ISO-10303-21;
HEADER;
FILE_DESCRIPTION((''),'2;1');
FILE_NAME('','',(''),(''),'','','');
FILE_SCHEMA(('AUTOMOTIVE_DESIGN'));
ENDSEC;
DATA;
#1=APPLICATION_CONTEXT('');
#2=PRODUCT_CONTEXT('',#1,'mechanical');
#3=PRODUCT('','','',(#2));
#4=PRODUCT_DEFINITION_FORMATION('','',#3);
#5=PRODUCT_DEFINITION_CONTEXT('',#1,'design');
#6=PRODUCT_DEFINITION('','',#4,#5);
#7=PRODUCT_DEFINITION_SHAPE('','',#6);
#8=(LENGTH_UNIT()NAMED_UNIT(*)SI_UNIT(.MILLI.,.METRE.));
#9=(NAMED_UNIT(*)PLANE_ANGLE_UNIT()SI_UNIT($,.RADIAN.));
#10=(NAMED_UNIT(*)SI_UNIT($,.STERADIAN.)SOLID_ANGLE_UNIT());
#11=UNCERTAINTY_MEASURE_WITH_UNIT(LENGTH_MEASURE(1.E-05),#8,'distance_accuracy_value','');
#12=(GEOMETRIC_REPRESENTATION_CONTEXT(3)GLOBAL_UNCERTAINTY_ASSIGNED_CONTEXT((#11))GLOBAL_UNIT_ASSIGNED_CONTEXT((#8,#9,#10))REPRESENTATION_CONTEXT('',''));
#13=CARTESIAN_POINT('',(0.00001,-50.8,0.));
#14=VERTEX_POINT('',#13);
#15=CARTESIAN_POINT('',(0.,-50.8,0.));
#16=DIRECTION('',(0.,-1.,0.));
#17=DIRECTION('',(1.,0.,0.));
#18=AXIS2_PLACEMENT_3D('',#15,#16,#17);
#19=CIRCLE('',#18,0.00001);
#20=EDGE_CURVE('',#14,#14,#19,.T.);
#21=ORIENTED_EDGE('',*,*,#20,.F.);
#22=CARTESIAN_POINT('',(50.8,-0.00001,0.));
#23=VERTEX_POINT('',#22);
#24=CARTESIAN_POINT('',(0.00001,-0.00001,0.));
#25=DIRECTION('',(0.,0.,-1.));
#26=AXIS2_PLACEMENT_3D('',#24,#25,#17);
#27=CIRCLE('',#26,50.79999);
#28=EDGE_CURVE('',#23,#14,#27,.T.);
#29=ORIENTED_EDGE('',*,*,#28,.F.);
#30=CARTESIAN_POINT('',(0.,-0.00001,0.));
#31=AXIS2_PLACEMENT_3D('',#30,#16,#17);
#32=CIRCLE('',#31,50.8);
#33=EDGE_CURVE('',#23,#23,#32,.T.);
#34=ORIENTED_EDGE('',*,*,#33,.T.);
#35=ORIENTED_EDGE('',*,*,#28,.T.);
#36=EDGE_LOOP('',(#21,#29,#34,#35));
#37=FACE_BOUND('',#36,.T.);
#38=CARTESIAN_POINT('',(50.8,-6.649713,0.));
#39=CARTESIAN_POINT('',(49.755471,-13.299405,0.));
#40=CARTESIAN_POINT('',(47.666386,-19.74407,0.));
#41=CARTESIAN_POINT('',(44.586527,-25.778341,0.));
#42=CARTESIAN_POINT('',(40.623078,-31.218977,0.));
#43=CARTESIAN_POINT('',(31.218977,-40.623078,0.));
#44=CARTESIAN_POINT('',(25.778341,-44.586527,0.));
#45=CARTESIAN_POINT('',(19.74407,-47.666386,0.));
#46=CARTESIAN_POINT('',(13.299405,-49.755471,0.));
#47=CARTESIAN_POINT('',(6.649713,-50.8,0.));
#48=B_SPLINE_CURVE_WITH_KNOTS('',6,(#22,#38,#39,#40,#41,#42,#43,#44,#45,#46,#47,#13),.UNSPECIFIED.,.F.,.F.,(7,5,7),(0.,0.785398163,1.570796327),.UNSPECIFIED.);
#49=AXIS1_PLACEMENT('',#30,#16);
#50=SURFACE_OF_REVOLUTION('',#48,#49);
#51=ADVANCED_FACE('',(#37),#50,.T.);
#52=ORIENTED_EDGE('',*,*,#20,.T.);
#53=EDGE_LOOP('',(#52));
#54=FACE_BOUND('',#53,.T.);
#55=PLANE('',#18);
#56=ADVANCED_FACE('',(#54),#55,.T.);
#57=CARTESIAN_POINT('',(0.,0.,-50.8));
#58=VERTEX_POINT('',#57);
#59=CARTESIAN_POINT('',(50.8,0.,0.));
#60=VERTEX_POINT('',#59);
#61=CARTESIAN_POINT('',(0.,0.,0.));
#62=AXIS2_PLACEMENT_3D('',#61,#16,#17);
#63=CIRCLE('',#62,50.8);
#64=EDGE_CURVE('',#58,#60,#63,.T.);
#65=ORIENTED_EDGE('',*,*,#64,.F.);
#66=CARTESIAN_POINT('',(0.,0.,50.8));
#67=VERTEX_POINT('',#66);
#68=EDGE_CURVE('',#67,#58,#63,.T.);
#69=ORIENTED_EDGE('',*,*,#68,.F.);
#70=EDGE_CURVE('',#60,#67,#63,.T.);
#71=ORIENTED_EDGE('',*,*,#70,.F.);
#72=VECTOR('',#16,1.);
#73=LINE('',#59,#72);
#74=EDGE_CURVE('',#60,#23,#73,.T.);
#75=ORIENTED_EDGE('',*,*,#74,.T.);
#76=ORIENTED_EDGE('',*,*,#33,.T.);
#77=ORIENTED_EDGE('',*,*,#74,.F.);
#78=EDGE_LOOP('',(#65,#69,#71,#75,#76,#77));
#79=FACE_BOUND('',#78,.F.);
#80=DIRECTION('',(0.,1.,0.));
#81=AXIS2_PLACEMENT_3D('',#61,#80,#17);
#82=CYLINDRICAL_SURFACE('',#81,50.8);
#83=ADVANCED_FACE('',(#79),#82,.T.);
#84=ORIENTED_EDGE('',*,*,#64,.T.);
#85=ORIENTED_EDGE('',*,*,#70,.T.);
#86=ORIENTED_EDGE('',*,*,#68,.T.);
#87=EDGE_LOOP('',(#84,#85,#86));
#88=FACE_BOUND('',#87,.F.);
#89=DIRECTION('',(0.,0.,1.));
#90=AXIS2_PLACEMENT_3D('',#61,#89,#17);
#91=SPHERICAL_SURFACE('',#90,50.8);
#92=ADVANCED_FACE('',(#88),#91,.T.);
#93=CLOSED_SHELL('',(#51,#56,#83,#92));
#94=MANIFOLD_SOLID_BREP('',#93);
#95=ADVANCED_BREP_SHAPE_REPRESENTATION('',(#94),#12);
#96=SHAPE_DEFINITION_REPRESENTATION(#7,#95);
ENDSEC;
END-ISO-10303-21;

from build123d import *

# Parameters (mm, degrees)
F0_R     = 50.8
F1_DEPTH = 50.8
F2_R     = 50.79999


# Not quite as in the source:
# - a fillet or chamfer is up to 0.001 mm smaller than in the source, because OpenCascade refuses the exact size


with BuildPart() as f1:
    # F0 (on Front) → F1 (new body)
    with BuildSketch(Plane.XZ):
        Circle(F0_R)
    extrude(amount=F1_DEPTH)

    # F2 (radius 50.8 in the source; OpenCascade refuses exactly that, so slightly less here)
    f2_edges = [f1.edges().sort_by_distance(p)[0] for p in [
        (-50.8, -50.8, 0),
    ]]
    fillet(f2_edges, radius=F2_R)

    # F3 (on Front) → F4 (revolve)
    with BuildSketch(Plane.XZ):
        with BuildLine():
            ThreePointArc((0, -50.8), (50.8, 0), (0, 50.8))
            Line((0, 50.8), (0, -50.8))
        make_face()
    revolve(axis=Axis((0, 0, 0.4323792445), (0, 0, -1)))


solid = f1.part
